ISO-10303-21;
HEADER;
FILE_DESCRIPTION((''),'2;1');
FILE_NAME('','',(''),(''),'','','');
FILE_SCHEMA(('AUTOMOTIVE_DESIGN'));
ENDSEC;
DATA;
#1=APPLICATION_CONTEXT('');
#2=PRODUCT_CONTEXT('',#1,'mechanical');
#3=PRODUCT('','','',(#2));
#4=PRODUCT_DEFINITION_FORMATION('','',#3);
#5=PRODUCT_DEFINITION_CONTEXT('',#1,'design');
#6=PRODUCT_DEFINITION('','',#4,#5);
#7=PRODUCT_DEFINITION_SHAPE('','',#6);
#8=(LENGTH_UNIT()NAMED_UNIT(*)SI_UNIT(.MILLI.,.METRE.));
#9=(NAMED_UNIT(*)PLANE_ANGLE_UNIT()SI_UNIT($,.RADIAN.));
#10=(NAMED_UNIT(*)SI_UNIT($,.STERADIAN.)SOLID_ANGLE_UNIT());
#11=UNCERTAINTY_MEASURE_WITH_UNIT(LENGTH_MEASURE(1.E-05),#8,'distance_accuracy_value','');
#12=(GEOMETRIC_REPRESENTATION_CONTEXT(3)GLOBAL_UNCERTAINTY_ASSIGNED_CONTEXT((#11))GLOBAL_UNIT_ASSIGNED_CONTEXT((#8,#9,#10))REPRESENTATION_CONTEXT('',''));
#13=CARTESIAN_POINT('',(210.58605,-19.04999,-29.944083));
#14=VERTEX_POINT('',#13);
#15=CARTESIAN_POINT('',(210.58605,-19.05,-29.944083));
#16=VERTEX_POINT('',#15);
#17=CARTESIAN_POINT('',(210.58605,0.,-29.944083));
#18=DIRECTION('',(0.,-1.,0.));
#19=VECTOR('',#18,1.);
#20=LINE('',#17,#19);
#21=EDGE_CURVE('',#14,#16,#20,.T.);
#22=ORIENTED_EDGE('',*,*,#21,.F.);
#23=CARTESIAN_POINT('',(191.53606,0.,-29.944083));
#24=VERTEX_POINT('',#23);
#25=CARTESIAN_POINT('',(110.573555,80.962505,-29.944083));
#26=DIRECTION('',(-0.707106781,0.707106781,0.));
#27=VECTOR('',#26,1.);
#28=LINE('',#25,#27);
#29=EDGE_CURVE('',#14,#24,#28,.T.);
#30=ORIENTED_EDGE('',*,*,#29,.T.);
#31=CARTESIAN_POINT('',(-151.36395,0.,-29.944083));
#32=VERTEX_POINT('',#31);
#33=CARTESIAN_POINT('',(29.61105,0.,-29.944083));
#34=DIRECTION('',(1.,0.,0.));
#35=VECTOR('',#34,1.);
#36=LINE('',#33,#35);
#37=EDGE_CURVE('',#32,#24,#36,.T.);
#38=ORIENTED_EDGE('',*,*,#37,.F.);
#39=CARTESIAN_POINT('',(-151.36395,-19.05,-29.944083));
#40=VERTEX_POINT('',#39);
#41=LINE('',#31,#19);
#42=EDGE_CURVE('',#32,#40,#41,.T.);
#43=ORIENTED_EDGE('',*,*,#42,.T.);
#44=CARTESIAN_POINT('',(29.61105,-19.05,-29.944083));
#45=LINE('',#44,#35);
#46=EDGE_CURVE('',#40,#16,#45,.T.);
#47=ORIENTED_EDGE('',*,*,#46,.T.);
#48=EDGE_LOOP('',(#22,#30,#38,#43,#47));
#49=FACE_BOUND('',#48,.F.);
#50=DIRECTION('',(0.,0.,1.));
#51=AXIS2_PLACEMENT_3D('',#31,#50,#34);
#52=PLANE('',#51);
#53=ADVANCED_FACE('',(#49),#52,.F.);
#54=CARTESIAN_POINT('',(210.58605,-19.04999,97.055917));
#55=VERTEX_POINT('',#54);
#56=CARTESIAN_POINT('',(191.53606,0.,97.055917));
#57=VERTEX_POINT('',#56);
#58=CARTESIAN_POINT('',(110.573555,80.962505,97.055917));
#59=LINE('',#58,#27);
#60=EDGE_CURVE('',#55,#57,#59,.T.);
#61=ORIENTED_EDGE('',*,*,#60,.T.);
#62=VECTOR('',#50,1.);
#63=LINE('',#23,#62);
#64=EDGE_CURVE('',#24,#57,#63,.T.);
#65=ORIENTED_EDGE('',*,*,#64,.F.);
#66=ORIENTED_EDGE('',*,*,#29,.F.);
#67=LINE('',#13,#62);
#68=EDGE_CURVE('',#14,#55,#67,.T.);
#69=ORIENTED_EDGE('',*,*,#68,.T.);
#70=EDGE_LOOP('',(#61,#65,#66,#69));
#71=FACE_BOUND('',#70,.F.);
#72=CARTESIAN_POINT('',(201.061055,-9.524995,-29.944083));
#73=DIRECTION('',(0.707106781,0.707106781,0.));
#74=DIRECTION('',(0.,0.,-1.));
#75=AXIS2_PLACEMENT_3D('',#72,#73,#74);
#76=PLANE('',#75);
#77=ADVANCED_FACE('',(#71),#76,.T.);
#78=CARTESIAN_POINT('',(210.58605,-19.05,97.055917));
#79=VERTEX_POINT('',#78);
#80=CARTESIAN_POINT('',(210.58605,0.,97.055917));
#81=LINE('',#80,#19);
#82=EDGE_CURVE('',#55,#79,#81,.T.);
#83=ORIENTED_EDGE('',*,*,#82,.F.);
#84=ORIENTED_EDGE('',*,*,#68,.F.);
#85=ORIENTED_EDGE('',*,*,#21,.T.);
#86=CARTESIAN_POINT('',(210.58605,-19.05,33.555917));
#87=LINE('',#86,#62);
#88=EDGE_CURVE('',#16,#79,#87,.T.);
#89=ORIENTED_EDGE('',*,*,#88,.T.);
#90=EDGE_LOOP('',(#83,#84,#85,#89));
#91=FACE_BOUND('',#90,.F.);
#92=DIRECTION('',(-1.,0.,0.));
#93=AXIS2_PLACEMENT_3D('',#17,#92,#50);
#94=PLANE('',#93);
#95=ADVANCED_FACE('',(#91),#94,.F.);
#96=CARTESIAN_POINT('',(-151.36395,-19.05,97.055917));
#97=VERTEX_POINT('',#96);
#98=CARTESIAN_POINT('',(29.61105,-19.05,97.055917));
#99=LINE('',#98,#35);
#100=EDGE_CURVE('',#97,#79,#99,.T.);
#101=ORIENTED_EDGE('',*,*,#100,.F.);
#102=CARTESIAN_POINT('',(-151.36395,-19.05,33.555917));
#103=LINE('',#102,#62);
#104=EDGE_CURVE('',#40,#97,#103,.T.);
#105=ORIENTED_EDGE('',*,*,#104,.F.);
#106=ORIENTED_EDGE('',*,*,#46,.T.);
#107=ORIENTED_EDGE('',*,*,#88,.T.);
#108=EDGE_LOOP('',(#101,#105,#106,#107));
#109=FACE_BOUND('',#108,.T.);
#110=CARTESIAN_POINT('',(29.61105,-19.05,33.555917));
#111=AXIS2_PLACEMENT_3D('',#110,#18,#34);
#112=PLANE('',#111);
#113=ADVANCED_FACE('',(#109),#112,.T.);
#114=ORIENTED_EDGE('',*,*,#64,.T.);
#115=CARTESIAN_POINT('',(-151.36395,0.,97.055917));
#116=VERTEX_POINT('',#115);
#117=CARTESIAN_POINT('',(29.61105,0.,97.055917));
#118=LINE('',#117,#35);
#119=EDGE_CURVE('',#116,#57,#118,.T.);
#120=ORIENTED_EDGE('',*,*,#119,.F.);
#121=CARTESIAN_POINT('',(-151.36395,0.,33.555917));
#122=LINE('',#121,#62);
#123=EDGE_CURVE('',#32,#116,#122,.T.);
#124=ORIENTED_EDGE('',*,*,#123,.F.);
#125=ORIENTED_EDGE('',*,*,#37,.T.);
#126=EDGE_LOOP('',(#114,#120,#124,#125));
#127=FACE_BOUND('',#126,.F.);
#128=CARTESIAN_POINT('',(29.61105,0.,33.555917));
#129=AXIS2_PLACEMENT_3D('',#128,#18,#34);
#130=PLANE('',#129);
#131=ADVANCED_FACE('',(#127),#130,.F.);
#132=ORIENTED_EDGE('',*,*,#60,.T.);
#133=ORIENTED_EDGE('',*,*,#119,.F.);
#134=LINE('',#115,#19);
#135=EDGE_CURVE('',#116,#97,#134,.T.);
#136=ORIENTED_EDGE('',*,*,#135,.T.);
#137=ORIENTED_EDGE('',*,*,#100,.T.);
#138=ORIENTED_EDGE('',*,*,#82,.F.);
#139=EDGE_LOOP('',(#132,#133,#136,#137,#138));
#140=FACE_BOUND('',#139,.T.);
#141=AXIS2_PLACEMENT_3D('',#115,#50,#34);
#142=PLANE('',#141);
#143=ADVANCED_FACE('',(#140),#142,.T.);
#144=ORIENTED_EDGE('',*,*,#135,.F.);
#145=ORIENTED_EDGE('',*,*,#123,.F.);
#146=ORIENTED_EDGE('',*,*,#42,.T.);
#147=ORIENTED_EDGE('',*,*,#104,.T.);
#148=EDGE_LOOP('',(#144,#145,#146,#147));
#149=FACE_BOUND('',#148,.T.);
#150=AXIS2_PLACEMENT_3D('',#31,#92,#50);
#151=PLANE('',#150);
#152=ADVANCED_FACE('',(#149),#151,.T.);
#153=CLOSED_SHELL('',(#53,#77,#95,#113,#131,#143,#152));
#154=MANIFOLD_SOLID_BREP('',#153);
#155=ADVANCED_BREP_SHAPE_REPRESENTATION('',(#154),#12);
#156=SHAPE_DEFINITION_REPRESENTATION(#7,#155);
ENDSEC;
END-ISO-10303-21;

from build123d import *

# Parameters (mm, degrees)
F0_W     = 361.95
F0_H     = 127
F1_DEPTH = 19.05
F2_SIZE2 = 19.04999
F2_SIZE  = 19.04999


# Not quite as in the source:
# - a fillet or chamfer is up to 0.001 mm smaller than in the source, because OpenCascade refuses the exact size


with BuildPart() as f1:
    # F0 (on Front) → F1 (new body)
    with BuildSketch(Plane.XZ):
        with Locations((29.6110501051, 33.5559173692)):
            Rectangle(F0_W, F0_H)
    extrude(amount=F1_DEPTH)

    # F2 (size 19.05 and 19.05 in the source; OpenCascade refuses exactly that, so slightly less here)
    f2_edges = [f1.edges().sort_by_distance(p)[0] for p in [
        (210.58605, 0, 33.555917),
    ]]
    chamfer(f2_edges, length=F2_SIZE, length2=F2_SIZE2)


solid = f1.part
